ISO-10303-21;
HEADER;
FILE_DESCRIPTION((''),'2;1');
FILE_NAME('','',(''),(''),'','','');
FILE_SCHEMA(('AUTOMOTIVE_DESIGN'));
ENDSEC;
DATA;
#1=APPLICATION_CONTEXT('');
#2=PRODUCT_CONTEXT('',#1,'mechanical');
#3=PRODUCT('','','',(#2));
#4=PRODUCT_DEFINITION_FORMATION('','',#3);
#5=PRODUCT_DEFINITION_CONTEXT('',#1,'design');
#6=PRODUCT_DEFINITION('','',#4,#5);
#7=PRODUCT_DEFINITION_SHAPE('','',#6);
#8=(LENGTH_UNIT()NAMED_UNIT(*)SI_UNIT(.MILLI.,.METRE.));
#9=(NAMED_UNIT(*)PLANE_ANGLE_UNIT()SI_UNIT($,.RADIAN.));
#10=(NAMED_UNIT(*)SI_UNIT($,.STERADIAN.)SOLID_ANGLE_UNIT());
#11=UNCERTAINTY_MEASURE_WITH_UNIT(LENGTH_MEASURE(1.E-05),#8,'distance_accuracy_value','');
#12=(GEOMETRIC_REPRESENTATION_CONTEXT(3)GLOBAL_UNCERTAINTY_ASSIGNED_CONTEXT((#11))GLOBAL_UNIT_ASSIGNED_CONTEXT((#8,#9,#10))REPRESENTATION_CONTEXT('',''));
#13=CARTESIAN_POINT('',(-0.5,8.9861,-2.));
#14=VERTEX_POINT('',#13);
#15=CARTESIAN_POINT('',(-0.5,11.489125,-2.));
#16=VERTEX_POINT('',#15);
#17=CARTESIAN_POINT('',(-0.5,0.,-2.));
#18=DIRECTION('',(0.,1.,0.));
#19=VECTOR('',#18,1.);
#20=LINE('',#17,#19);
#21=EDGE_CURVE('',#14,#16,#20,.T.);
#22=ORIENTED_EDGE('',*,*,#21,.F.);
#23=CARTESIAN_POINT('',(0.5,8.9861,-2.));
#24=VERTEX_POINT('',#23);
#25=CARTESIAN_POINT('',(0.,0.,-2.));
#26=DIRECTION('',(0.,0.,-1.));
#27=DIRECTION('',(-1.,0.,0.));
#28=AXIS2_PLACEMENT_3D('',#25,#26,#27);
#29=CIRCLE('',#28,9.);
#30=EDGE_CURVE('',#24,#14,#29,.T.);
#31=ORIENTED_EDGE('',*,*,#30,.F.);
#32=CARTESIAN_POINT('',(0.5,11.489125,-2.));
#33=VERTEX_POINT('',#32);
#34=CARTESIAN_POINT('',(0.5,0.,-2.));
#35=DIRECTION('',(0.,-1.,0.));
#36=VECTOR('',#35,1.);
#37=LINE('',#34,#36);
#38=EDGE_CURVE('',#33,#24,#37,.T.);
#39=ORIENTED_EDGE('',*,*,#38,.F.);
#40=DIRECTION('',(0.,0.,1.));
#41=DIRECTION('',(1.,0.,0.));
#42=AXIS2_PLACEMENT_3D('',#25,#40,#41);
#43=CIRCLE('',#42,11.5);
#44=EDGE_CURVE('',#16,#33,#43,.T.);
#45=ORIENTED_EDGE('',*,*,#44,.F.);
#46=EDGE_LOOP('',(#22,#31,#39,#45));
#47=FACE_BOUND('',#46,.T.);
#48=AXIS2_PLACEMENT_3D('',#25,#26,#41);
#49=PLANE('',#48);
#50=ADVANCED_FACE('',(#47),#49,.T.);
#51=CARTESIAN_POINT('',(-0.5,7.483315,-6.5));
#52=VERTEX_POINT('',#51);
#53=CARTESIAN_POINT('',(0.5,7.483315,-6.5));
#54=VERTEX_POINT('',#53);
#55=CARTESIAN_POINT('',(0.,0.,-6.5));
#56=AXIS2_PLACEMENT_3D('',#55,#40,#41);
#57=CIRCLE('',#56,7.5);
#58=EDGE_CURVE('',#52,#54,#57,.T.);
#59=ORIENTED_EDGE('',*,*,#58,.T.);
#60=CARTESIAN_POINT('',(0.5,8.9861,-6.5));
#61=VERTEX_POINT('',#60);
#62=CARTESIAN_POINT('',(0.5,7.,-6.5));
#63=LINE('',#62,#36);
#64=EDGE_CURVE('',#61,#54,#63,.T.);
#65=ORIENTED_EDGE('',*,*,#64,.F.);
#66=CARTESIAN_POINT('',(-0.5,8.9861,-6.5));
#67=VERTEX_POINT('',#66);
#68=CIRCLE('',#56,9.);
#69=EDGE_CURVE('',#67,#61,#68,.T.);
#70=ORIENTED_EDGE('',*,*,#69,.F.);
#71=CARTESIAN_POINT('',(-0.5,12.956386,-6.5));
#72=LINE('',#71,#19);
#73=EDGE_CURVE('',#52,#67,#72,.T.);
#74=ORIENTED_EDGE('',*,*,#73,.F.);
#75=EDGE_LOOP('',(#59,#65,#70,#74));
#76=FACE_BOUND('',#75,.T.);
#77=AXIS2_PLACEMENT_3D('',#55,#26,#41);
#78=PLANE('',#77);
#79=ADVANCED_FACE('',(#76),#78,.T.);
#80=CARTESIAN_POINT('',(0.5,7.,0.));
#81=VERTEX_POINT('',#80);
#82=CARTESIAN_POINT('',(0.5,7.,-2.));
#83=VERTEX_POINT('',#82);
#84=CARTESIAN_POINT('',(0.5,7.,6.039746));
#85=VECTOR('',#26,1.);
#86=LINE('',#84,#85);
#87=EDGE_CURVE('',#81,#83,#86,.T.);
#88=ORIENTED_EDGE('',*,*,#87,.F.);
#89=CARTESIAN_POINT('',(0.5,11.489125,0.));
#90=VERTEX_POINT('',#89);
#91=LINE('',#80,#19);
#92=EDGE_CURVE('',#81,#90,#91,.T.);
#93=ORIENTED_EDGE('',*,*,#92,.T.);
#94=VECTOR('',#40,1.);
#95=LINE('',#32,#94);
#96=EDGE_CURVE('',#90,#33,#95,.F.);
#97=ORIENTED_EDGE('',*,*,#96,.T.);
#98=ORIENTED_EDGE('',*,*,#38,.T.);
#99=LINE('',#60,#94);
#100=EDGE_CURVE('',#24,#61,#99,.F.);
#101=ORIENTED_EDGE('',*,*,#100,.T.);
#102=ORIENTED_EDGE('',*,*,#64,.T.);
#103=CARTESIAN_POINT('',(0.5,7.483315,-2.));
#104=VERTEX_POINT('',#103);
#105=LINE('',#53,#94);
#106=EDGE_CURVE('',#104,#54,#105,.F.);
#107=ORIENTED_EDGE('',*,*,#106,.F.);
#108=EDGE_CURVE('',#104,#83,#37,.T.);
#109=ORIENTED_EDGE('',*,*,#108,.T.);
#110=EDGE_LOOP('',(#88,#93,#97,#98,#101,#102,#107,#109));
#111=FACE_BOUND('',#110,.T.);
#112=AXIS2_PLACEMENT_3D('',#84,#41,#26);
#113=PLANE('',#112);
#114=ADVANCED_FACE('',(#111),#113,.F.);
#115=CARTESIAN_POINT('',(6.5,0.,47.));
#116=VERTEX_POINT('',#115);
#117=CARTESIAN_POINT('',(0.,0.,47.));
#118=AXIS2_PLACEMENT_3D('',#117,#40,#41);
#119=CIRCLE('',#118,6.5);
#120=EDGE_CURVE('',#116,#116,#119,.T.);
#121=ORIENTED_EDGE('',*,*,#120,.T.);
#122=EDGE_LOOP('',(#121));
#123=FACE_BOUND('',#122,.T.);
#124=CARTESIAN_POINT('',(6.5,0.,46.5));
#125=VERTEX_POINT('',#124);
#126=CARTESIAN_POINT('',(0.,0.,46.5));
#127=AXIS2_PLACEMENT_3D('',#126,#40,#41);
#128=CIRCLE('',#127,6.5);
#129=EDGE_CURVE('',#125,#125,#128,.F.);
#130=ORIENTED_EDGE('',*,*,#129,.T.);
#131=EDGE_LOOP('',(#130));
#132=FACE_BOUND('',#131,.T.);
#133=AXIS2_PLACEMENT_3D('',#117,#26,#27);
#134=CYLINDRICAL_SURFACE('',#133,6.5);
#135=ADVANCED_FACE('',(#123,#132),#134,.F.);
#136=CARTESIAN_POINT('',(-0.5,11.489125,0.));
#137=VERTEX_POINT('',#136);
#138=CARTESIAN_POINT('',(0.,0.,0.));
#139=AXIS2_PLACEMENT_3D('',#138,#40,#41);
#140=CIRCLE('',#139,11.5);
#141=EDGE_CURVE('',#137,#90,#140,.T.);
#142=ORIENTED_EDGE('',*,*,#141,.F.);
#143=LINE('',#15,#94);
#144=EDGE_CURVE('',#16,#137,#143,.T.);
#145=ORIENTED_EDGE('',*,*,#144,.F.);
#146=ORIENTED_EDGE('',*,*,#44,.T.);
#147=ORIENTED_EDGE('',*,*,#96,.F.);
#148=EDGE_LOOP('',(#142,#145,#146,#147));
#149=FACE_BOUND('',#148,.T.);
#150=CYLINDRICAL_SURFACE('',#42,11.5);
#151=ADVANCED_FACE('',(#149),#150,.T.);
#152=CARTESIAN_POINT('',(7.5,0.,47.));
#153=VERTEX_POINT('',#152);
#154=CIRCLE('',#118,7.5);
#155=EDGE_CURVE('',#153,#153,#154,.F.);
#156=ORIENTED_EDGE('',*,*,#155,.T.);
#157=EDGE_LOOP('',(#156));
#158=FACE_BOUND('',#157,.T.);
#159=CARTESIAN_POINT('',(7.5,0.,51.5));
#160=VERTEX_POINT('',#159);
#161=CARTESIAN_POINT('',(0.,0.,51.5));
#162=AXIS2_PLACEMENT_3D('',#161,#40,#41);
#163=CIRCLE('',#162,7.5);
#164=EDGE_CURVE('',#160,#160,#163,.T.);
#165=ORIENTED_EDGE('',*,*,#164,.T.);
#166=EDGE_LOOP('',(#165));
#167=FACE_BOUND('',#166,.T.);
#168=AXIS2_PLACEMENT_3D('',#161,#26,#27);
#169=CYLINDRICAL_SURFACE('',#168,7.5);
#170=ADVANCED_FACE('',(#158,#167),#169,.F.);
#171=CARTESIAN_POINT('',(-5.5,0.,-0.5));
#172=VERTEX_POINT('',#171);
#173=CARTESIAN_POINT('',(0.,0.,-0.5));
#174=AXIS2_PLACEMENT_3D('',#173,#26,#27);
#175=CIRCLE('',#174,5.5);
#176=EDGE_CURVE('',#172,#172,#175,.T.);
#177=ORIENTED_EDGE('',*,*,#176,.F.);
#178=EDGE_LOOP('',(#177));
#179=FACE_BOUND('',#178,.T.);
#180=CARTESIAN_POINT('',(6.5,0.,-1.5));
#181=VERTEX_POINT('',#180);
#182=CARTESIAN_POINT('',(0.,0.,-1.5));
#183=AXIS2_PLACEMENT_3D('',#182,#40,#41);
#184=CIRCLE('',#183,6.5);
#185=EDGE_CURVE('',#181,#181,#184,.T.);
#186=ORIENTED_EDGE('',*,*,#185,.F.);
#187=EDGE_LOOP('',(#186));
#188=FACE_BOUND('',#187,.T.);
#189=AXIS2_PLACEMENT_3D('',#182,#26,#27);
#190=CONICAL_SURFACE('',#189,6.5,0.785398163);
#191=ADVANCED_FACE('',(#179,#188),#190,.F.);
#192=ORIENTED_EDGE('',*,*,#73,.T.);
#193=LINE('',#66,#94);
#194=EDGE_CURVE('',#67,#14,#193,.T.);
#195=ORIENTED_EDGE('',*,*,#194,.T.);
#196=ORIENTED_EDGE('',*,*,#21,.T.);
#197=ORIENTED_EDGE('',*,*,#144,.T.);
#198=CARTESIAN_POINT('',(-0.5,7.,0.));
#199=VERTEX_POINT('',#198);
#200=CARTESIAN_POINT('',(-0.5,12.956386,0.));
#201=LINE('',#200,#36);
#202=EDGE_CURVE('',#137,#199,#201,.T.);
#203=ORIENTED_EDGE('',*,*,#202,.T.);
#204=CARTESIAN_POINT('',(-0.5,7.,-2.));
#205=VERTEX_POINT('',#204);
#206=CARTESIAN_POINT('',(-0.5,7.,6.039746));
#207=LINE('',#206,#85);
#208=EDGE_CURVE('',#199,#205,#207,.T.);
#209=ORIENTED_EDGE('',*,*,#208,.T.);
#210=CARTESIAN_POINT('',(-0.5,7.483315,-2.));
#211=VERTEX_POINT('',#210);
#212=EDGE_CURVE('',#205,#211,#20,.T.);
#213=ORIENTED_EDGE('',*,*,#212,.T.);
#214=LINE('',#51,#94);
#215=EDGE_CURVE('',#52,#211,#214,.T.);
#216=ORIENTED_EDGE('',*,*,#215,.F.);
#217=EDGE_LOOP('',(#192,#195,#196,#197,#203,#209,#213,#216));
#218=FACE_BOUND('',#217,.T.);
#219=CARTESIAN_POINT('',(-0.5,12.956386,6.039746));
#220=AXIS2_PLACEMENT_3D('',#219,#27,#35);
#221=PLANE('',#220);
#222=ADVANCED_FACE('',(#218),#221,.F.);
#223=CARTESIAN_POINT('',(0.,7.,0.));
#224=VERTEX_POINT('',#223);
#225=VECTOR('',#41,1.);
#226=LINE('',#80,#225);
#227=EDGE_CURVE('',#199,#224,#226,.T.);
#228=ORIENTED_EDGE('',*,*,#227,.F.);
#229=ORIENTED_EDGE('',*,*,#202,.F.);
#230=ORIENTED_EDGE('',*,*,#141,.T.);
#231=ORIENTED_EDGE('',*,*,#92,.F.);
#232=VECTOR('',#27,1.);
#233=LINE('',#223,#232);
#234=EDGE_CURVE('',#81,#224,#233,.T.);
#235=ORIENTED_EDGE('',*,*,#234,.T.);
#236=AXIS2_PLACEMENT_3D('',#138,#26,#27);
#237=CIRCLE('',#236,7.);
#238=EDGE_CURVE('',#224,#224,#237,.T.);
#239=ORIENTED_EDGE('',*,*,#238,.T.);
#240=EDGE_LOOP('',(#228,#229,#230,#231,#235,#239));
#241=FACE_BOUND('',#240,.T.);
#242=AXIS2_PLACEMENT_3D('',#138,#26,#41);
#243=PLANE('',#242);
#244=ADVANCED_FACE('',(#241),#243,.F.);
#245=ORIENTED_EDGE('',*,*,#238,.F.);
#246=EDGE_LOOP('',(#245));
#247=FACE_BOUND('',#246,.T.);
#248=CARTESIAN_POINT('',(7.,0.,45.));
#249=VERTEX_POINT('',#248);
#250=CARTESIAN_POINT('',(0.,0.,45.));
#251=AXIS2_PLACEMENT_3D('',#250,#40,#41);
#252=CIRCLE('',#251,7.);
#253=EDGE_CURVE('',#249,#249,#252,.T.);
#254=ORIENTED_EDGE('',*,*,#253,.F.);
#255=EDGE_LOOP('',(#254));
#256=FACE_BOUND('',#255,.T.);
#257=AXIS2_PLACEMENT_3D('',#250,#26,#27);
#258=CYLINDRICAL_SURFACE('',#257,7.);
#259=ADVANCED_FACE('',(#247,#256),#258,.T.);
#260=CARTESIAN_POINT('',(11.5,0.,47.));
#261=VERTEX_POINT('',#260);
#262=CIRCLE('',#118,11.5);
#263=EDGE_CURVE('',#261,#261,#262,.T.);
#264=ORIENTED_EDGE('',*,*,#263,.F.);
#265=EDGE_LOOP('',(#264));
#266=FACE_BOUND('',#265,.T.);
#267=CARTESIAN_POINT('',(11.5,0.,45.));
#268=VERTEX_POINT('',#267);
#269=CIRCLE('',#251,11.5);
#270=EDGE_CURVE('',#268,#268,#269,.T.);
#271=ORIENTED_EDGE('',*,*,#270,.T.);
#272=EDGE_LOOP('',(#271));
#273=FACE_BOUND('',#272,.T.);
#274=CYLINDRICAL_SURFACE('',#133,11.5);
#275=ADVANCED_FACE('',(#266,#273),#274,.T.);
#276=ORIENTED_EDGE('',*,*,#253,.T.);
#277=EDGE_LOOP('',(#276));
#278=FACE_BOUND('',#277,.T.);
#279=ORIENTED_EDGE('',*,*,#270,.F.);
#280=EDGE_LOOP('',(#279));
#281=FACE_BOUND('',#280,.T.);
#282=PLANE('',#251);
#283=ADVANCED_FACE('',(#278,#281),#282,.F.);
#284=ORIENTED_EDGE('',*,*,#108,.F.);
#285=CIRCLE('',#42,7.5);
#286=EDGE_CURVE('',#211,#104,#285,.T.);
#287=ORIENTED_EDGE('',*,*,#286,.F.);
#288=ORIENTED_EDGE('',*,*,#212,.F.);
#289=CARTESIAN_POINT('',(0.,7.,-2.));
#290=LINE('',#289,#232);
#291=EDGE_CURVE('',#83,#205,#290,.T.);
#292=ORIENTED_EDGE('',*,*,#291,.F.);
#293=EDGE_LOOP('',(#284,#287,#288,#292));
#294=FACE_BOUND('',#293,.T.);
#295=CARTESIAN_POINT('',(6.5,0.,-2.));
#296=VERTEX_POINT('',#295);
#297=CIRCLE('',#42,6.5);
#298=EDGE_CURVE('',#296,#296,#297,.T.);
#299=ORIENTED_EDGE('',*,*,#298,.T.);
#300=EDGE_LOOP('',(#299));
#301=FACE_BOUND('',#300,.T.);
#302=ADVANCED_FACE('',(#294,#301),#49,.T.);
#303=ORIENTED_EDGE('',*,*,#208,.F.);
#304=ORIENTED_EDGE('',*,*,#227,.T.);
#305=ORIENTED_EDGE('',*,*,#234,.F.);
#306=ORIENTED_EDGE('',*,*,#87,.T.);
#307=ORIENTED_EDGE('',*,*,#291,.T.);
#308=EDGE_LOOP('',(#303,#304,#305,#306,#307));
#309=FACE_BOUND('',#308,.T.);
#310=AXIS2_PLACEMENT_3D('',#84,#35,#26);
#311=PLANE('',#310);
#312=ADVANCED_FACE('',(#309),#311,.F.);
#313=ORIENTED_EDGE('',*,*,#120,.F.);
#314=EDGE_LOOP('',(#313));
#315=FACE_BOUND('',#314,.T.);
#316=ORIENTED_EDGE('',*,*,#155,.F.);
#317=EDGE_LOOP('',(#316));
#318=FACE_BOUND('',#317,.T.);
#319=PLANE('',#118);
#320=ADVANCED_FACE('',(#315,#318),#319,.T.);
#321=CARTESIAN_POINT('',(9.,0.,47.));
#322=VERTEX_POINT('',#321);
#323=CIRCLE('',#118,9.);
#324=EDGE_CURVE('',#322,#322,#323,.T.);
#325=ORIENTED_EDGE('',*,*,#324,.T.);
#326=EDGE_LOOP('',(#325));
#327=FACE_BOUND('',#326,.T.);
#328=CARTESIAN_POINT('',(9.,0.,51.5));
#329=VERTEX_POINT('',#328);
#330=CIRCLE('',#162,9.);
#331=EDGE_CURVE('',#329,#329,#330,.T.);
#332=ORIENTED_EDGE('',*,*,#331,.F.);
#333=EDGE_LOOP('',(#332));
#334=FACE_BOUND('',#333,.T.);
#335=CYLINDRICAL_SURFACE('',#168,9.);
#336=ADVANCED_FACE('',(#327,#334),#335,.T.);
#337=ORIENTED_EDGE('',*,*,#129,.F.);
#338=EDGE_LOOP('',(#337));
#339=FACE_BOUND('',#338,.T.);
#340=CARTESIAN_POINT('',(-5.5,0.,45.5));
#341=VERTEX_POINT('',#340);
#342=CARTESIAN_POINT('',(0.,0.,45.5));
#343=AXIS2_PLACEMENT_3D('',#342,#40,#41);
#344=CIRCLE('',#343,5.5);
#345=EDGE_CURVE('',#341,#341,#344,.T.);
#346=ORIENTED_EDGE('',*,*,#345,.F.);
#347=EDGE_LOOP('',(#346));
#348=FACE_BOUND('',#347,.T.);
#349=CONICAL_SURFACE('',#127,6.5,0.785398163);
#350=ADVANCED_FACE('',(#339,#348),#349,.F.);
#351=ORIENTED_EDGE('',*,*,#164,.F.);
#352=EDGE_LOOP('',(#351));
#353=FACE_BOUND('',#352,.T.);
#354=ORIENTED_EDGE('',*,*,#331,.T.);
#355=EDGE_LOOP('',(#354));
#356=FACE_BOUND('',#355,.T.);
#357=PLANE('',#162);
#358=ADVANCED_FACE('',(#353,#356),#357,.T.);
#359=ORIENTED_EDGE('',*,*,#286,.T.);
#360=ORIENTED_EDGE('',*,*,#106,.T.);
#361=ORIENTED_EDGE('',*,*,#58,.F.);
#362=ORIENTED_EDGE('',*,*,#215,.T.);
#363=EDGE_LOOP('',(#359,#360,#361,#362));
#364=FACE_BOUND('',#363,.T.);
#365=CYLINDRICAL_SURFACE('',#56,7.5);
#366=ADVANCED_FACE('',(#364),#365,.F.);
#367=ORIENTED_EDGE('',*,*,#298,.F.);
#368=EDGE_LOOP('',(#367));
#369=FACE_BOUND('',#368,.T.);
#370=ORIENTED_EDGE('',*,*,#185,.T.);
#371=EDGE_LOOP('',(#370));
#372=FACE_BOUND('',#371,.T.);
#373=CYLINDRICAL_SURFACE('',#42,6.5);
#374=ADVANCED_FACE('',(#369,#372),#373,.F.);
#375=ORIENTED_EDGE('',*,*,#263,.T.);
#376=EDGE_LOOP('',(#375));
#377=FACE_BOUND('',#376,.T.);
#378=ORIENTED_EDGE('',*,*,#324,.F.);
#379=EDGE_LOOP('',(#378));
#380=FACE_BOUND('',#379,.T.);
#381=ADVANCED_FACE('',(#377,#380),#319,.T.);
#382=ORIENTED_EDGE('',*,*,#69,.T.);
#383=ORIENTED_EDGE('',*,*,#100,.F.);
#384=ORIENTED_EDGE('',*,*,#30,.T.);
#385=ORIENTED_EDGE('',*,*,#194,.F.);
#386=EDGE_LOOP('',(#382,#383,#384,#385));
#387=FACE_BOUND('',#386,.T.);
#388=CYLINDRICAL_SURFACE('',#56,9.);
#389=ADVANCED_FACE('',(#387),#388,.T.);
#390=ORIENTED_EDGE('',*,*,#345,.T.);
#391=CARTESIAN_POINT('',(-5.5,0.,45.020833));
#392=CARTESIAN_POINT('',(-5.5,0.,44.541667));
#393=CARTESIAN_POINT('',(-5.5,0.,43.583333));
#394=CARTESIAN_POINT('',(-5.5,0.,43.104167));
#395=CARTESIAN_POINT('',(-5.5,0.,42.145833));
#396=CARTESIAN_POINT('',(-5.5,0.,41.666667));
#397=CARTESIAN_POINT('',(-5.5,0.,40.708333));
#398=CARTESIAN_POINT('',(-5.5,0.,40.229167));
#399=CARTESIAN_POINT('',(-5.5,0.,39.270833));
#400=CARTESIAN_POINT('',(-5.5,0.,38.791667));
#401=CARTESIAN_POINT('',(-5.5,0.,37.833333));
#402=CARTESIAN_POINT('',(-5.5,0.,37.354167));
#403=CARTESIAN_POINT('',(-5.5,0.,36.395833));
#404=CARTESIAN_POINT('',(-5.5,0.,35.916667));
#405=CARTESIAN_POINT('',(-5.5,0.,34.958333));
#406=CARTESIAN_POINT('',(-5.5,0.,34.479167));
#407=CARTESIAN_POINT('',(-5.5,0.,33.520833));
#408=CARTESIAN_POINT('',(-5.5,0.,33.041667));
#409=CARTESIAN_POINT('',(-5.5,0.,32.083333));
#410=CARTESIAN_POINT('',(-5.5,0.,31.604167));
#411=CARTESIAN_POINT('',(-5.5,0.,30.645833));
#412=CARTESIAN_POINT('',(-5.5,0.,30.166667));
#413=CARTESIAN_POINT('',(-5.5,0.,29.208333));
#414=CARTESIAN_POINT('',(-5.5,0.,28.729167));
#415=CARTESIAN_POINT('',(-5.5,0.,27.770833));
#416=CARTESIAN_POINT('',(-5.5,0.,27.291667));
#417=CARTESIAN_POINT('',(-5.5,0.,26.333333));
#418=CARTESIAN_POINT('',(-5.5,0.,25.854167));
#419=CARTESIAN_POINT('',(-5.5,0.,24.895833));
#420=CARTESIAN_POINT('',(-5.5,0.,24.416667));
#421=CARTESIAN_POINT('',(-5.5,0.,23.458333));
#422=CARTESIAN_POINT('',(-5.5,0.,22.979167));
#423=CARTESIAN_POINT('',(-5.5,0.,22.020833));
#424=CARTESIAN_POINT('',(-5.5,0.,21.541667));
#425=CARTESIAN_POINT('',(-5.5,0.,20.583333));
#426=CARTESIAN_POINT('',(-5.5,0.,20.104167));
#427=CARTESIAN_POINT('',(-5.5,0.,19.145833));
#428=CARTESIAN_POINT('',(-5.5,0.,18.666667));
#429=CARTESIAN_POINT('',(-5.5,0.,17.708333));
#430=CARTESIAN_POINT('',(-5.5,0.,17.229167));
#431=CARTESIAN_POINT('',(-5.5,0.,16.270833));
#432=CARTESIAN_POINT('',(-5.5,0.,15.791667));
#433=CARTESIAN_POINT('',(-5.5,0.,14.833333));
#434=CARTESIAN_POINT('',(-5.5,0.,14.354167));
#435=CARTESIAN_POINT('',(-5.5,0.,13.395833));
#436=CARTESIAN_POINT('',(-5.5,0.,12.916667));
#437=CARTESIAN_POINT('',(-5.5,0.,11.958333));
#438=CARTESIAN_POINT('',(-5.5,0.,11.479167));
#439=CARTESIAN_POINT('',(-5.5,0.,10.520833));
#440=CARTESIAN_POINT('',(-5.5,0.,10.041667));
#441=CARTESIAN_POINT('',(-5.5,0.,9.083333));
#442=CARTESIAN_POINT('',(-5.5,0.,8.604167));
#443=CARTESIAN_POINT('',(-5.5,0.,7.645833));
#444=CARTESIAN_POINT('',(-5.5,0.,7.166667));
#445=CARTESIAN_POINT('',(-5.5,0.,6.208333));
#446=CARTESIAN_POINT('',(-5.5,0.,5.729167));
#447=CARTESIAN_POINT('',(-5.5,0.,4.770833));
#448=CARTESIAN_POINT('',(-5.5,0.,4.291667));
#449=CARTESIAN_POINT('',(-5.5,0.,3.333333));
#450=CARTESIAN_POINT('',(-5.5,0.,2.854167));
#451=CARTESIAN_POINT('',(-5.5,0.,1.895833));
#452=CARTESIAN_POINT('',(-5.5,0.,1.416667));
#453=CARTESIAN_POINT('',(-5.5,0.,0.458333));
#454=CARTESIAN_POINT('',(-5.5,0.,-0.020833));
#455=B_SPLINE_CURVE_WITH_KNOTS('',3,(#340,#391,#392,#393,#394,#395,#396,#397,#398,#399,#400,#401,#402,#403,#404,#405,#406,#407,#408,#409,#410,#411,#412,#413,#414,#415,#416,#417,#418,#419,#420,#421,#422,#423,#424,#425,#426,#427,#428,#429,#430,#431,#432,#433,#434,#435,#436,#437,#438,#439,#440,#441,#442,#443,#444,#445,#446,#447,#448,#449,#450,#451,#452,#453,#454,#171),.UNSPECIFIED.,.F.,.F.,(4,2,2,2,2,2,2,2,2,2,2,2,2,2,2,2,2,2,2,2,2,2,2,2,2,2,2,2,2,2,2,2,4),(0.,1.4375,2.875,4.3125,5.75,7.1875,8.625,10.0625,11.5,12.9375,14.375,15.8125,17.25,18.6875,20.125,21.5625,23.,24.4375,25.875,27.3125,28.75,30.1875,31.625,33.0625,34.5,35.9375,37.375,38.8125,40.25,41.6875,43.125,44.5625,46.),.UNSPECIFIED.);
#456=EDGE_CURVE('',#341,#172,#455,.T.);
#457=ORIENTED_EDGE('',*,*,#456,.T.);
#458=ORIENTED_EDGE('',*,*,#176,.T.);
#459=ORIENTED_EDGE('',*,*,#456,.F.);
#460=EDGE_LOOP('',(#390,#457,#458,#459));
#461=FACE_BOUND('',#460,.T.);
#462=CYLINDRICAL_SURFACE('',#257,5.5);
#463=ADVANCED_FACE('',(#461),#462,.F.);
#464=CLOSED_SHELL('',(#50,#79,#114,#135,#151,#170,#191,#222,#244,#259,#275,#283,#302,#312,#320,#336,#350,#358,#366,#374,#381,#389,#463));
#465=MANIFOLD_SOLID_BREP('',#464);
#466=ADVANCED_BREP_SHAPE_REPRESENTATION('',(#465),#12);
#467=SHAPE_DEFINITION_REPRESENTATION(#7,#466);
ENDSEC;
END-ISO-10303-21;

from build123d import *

# Parameters (mm, degrees)
SKETCH_1_R          = 7
SKETCH_1_R_2        = 5.5
EXTRUDE_1_DEPTH     = 45
SKETCH_2_R          = 11.5
SKETCH_2_R_2        = 6.5
EXTRUDE_2_DEPTH     = 2
SKETCH_3_R          = 9
SKETCH_3_R_2        = 7.5
EXTRUDE_3_DEPTH     = 4.5
CHAMFER_1_SIZE      = 1.5
CUT_EXTRUDE_1_REACH = 62.237
SKETCH_5_W          = 1
SKETCH_5_H          = 5.956385966


with BuildPart() as part:
    # 草图1 → 凸台-拉伸1 (new body)
    with BuildSketch(Plane.XY):
        with Locations(Location((0, 0, 0), (0, 0, 180))):
            Circle(SKETCH_1_R)
        with Locations(Location((0, 0, 0), (0, 0, 180))):
            Circle(SKETCH_1_R_2, mode=Mode.SUBTRACT)
    extrude(amount=EXTRUDE_1_DEPTH)

    # 草图2 → 凸台-拉伸2 (add)
    with BuildSketch(Plane.XY.offset(45)):
        Circle(SKETCH_2_R)
        Circle(SKETCH_2_R_2, mode=Mode.SUBTRACT)
    extrude_2 = extrude(amount=EXTRUDE_2_DEPTH)

    # 草图3 → 凸台-拉伸3 (add)
    with BuildSketch(Plane.XY.offset(47)):
        Circle(SKETCH_3_R)
        Circle(SKETCH_3_R_2, mode=Mode.SUBTRACT)
    extrude_3 = extrude(amount=EXTRUDE_3_DEPTH)

    # 镜向16: 凸台-拉伸2, 凸台-拉伸3 across plane
    add(extrude_2.mirror(Plane(origin=(0, 0, 22.5), x_dir=(1, 0, 0), z_dir=(0, 0, -1))))
    add(extrude_3.mirror(Plane(origin=(0, 0, 22.5), x_dir=(1, 0, 0), z_dir=(0, 0, -1))))

    # 倒角1
    # the kernel refuses this chamfer: 1.5 mm, written as the material it adds along each edge
    with BuildSketch(Plane(origin=(0, 0, 45), x_dir=(1, 0, 0), z_dir=(0, -1, 0))) as chamfer_1_piece_1_section:
        Polygon((6.5, CHAMFER_1_SIZE), (6.5 - CHAMFER_1_SIZE, 0), (6.5, 0), align=None)
    chamfer_1_piece_1 = revolve(axis=Axis((0, 0, 45), (0, 0, 1)), mode=Mode.PRIVATE)
    chamfer_1_piece_1 = chamfer_1_piece_1 - Plane(origin=(0, 0, 45.996711571), x_dir=(-1, 0, 0), z_dir=(0, 0, -1)) * Cylinder(5.5, 26, mode=Mode.PRIVATE)
    add(chamfer_1_piece_1)
    with BuildSketch(Plane(origin=(0, 0, 0), x_dir=(1, 0, 0), z_dir=(0, -1, 0))) as chamfer_1_piece_2_section:
        Polygon((6.5, -CHAMFER_1_SIZE), (6.5 - CHAMFER_1_SIZE, 0), (6.5, 0), align=None)
    chamfer_1_piece_2 = revolve(axis=Axis((0, 0, 0), (0, 0, 1)), mode=Mode.PRIVATE)
    chamfer_1_piece_2 = chamfer_1_piece_2 - Plane(origin=(0, 0, -0.996711571), x_dir=(-1, 0, 0), z_dir=(0, 0, -1)) * Cylinder(5.5, 26, mode=Mode.PRIVATE)
    add(chamfer_1_piece_2)

    # 切除-拉伸1: up to this face of the body (flat: up to its plane)
    cut_extrude_1_end = Plane(part.part.faces().sort_by_distance((-11.174730881, 0, 0))[0])
    # 草图5 → 切除-拉伸1 (cut, up to the picked face)
    with BuildSketch(Plane(origin=(0, 0, -6.5), x_dir=(-1, 0, 0), z_dir=(0, 0, -1)), mode=Mode.PRIVATE) as cut_extrude_1_sk1:
        with Locations((0, 9.978192983)):
            Rectangle(SKETCH_5_W, SKETCH_5_H)
    cut_extrude_1_tool1 = split(extrude(cut_extrude_1_sk1.sketch, amount=-CUT_EXTRUDE_1_REACH, mode=Mode.PRIVATE), bisect_by=cut_extrude_1_end, keep=Keep.BOTH, mode=Mode.PRIVATE)
    add(cut_extrude_1_tool1.solids().sort_by(Axis((0, 9.978193, -6.5), (0, 0, 1)))[0], mode=Mode.SUBTRACT)


solid = part.part
